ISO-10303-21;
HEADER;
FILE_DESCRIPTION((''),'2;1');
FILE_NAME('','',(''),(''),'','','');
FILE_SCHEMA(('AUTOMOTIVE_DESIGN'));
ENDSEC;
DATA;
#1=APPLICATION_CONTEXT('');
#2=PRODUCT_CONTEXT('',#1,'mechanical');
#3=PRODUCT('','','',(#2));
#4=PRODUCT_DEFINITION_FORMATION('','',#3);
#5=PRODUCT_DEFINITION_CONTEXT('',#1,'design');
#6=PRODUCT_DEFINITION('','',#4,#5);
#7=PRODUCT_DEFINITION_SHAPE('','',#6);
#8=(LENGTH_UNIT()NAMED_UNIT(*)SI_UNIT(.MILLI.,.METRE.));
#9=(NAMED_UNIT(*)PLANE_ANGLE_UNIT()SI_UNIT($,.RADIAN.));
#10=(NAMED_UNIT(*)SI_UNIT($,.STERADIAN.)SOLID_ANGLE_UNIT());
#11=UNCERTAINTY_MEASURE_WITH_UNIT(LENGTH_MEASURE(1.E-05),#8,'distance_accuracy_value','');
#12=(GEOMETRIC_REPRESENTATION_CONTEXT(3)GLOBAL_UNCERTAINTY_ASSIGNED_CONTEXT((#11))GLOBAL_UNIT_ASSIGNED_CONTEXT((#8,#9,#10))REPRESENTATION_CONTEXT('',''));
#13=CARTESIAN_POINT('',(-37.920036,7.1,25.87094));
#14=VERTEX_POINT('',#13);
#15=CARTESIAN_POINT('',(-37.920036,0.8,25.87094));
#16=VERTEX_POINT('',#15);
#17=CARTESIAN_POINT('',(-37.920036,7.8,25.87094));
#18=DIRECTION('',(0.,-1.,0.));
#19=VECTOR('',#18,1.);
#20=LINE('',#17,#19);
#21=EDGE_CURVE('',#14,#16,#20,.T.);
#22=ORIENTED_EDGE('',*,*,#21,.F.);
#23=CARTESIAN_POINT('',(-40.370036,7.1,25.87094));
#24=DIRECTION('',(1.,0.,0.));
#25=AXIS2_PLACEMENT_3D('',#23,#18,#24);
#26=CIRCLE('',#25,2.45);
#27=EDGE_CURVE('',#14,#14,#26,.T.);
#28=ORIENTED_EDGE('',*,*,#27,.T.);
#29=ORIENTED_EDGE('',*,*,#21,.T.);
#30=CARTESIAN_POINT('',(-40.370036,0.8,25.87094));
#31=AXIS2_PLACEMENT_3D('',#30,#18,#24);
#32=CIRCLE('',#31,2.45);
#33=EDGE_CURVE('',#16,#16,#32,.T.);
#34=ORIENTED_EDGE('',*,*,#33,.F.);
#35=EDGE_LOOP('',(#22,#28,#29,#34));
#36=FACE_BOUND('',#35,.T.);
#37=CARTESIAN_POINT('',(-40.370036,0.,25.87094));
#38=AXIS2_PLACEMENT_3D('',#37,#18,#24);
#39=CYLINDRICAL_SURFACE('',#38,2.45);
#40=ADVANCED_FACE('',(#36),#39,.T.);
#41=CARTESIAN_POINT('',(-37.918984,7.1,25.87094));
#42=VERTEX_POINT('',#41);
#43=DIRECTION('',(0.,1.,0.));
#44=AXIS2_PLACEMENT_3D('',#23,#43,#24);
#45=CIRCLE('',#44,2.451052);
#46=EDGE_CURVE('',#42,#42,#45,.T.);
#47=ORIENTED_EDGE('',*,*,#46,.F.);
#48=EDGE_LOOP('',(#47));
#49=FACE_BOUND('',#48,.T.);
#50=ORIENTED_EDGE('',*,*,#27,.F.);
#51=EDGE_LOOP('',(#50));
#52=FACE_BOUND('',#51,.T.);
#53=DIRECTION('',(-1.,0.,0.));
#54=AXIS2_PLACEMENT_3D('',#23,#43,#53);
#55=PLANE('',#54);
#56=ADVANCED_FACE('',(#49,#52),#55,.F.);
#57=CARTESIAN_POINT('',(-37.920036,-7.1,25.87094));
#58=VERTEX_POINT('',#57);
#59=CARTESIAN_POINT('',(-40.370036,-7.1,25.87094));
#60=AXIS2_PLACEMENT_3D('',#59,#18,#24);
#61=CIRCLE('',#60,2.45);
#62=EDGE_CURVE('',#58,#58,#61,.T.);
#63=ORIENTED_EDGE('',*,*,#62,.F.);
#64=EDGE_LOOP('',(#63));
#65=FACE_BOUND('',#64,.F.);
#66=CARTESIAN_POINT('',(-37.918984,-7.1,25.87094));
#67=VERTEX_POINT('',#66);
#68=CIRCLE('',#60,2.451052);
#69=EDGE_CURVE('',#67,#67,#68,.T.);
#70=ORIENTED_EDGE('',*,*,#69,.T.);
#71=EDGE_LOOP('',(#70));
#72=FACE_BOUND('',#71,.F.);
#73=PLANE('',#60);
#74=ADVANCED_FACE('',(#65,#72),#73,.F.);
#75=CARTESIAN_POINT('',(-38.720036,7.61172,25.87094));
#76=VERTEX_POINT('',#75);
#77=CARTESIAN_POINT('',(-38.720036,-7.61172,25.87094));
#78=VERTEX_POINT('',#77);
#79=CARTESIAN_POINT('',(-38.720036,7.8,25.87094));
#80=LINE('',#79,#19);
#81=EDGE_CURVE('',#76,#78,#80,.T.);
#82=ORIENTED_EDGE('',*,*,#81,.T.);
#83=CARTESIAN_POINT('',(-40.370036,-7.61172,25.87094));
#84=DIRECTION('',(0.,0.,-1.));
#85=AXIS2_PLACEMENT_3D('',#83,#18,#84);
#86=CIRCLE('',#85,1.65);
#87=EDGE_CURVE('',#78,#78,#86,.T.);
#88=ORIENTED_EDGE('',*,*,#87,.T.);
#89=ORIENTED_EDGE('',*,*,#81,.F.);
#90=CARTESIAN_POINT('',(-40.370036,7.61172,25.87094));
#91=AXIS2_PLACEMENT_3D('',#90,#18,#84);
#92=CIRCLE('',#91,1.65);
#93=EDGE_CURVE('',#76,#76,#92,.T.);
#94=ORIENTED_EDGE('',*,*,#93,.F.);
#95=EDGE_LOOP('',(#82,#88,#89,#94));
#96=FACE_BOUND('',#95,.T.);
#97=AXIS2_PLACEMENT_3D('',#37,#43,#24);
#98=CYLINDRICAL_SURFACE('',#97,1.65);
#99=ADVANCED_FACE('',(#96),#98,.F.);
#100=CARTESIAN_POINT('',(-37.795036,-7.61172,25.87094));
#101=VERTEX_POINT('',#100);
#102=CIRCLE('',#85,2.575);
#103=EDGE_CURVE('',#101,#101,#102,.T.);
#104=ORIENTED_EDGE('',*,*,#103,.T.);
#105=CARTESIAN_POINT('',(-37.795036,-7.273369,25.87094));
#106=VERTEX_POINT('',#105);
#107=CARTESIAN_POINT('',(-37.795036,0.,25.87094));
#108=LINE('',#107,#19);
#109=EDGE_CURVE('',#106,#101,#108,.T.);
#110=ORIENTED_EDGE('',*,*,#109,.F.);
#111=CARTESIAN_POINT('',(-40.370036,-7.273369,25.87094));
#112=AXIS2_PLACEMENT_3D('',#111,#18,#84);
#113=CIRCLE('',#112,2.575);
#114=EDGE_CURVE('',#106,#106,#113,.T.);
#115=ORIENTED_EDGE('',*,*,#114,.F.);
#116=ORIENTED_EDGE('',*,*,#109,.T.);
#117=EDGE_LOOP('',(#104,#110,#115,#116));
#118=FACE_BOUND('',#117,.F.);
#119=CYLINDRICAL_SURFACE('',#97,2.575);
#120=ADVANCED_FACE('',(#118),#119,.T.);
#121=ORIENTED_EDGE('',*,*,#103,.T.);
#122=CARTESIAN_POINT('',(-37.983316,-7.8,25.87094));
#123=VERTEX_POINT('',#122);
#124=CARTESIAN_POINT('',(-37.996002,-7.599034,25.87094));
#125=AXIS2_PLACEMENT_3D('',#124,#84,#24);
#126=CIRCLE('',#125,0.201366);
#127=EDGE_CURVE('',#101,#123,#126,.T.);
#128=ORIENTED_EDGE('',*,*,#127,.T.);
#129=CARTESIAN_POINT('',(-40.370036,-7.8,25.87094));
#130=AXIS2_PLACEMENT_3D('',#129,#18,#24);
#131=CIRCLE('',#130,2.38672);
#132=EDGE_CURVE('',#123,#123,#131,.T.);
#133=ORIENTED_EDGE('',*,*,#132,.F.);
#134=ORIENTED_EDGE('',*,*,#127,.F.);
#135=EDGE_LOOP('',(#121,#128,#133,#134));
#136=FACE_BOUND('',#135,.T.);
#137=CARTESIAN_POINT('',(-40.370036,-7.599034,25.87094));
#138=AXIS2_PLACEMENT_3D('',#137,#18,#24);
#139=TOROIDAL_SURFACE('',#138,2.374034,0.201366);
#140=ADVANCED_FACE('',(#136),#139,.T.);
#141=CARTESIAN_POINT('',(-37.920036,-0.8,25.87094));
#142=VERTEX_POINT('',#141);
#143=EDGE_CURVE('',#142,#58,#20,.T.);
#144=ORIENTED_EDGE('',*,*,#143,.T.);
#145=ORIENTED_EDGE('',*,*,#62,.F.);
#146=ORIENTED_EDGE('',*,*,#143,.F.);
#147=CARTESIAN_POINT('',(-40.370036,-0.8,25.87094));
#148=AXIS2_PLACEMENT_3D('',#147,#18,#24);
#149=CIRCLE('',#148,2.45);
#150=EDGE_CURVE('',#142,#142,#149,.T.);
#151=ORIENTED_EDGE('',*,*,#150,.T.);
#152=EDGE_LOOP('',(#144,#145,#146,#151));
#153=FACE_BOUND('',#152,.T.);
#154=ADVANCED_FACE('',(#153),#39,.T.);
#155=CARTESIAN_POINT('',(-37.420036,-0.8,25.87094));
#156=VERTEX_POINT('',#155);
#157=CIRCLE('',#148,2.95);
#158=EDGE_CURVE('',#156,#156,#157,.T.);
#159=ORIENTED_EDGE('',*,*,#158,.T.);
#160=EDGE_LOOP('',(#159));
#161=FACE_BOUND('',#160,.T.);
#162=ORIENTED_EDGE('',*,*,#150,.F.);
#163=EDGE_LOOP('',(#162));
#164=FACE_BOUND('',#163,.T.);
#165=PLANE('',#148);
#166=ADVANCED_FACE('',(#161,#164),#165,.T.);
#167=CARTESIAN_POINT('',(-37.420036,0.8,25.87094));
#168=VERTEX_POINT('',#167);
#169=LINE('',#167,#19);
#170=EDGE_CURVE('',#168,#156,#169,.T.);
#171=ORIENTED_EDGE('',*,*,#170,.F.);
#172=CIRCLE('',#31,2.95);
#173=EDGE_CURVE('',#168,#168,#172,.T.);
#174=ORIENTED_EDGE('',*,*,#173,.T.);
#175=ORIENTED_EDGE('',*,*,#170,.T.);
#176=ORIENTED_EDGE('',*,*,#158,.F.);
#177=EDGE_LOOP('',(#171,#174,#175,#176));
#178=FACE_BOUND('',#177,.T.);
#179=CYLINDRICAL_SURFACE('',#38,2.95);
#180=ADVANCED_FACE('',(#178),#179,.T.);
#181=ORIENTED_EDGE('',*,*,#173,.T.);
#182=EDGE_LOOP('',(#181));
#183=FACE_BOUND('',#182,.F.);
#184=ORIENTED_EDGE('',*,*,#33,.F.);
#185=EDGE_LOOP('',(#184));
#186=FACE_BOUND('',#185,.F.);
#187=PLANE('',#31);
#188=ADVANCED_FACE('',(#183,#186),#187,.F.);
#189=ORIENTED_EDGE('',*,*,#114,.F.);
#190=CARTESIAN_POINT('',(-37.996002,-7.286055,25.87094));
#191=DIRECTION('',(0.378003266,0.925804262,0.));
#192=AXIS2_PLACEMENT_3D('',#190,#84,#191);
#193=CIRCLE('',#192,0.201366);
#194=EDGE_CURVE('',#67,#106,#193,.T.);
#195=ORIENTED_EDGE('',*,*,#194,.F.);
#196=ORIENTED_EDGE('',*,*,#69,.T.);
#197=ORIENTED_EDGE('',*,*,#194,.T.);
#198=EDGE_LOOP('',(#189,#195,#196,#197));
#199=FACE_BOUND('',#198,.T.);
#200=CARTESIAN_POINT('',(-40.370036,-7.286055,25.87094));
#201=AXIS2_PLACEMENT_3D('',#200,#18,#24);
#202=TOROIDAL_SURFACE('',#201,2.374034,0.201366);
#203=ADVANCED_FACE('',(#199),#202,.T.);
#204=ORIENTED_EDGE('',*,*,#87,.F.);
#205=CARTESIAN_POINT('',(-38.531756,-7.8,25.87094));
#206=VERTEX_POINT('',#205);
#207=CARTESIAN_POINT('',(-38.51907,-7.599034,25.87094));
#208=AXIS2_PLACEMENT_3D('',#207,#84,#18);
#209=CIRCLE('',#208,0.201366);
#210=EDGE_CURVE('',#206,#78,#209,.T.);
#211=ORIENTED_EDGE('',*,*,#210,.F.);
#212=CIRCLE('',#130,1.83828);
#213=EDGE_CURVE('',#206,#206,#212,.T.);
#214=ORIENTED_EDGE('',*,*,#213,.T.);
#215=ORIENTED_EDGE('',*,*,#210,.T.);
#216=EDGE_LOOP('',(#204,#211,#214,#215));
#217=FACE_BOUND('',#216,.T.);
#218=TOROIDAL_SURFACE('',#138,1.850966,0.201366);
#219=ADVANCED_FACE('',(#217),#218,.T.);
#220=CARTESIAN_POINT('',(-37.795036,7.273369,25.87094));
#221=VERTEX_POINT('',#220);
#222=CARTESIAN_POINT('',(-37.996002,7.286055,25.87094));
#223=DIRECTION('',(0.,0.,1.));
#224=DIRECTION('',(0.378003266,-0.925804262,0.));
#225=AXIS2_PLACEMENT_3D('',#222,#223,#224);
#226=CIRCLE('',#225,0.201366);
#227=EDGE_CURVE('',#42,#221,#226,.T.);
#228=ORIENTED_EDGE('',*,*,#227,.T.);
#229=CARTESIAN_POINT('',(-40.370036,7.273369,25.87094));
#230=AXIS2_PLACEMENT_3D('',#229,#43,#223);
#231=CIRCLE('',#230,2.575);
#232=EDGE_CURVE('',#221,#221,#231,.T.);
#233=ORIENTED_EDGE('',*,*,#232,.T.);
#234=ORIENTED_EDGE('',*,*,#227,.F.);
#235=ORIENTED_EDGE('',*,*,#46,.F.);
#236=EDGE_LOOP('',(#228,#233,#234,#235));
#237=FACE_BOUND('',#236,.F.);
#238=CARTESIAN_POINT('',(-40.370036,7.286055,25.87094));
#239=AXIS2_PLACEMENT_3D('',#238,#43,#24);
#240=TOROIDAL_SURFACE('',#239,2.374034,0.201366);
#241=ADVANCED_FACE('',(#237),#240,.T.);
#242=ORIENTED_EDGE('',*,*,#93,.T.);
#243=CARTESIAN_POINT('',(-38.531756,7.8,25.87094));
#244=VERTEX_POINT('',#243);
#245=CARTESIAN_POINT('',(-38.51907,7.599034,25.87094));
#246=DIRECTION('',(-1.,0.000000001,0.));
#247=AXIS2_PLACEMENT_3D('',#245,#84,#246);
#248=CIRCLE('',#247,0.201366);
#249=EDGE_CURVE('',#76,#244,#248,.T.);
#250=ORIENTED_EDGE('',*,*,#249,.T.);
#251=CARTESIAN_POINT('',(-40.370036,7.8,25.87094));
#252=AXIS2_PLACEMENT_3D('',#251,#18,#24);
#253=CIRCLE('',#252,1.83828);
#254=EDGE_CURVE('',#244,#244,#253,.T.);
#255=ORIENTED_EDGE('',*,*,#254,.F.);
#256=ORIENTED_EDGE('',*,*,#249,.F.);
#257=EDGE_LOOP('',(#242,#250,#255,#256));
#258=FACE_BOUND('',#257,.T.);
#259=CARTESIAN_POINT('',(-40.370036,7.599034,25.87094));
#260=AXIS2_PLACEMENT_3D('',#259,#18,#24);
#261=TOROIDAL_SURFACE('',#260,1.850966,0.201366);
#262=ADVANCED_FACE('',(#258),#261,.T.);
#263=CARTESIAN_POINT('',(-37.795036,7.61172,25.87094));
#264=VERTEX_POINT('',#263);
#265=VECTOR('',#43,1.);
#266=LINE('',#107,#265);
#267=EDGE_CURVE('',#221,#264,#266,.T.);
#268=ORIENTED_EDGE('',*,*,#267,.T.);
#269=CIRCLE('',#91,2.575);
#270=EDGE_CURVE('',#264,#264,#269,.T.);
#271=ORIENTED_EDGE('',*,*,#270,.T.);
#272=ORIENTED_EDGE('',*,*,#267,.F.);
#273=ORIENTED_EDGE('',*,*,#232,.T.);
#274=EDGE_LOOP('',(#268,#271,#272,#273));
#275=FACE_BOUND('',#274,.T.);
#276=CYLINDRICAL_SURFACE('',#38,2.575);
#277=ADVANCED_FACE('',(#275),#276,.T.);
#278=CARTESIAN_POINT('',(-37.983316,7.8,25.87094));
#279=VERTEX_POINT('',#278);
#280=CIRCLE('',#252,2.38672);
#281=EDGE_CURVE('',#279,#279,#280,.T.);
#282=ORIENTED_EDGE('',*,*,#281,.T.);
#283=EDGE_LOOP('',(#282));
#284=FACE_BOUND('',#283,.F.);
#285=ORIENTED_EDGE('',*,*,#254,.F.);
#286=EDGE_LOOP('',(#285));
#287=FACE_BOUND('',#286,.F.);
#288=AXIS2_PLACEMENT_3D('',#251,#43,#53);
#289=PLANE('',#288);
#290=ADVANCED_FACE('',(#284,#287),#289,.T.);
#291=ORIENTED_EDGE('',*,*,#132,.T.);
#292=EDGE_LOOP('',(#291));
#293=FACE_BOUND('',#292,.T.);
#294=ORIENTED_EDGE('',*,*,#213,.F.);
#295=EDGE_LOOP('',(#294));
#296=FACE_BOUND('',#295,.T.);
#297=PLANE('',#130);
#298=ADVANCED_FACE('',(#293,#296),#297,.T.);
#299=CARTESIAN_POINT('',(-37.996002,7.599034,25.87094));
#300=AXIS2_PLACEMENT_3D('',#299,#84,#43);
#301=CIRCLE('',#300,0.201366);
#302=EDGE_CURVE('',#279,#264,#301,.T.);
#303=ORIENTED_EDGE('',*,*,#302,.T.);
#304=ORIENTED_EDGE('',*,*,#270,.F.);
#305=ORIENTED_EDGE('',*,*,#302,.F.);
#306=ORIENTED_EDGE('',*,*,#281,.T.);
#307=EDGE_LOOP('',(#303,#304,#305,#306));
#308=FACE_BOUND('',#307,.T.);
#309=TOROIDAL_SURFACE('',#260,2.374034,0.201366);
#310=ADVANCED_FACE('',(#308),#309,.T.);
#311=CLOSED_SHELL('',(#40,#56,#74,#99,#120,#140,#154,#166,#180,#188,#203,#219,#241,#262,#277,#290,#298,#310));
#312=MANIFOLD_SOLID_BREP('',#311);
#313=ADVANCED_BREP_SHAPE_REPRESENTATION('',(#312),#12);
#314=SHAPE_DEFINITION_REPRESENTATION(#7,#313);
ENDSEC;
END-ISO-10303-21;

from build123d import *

# Parameters (mm, degrees)
F0_R     = 2.95
F0_R_2   = 2.575
F1_DEPTH = 0.8
F0_R_3   = 2.45
F2_DEPTH = 0.8
F0_R_4   = 1.65
F3_DEPTH = 7.8
F4_DEPTH = 7.8
F5_DEPTH = 7.1
F6_DEPTH = 7.8
F7_DEPTH = 0.8


# Not quite as in the source:
# - a fillet or chamfer that OpenCascade refuses, or shapes differently, is made with other operations: its cross-section is extruded or revolved along the edge and cut away or added


with BuildPart() as f1:
    # F0 (on Front) → F1 (new body)
    with BuildSketch(Plane.XZ):
        with Locations((-40.3700359166, 25.8709397167)):
            Circle(F0_R)
        with Locations((-40.3700359166, 25.8709397167)):
            Circle(F0_R_2, mode=Mode.SUBTRACT)
    extrude(amount=F1_DEPTH)

    # F0 (on Front) → F2 (join)
    with BuildSketch(Plane.XZ):
        with Locations((-40.3700359166, 25.8709397167)):
            Circle(F0_R_2)
        with Locations((-40.3700359166, 25.8709397167)):
            Circle(F0_R_3, mode=Mode.SUBTRACT)
    extrude(amount=F2_DEPTH)

    # F0 (on Front) → F3 (join)
    with BuildSketch(Plane.XZ):
        with Locations((-40.3700359166, 25.8709397167)):
            Circle(F0_R_3)
        with Locations((-40.3700359166, 25.8709397167)):
            Circle(F0_R_4, mode=Mode.SUBTRACT)
    extrude(amount=F3_DEPTH)

    # F0 (on Front) → F4 (join)
    with BuildSketch(Plane.XZ):
        with Locations((-40.3700359166, 25.8709397167)):
            Circle(F0_R_2)
        with Locations((-40.3700359166, 25.8709397167)):
            Circle(F0_R_3, mode=Mode.SUBTRACT)
    extrude(amount=F4_DEPTH)

    # F0 (on Front) → F5 (cut)
    with BuildSketch(Plane.XZ):
        with Locations((-40.3700359166, 25.8709397167)):
            Circle(F0_R_2)
        with Locations((-40.3700359166, 25.8709397167)):
            Circle(F0_R_3, mode=Mode.SUBTRACT)
    extrude(amount=F5_DEPTH, mode=Mode.SUBTRACT)

    # F0 (on Front) → F6 (join)
    with BuildSketch(Plane.XZ):
        with Locations((-40.3700359166, 25.8709397167)):
            Circle(F0_R_3)
        with Locations((-40.3700359166, 25.8709397167)):
            Circle(F0_R_4, mode=Mode.SUBTRACT)
    extrude(amount=-F6_DEPTH)

    # F0 (on Front) → F7 (join)
    with BuildSketch(Plane.XZ):
        with Locations((-40.3700359166, 25.8709397167)):
            Circle(F0_R)
        with Locations((-40.3700359166, 25.8709397167)):
            Circle(F0_R_2, mode=Mode.SUBTRACT)
        with Locations((-40.3700359166, 25.8709397167)):
            Circle(F0_R_2)
        with Locations((-40.3700359166, 25.8709397167)):
            Circle(F0_R_3, mode=Mode.SUBTRACT)
    extrude(amount=-F7_DEPTH)

    # F8: F1 across plane


with BuildPart() as f1_1:
    add(f1.part)
    add(f1.part.mirror(Plane.XZ))

    # F9: fillet of radius 0.2 on 6 edges, made by hand

    # F9_s1 → F9_t2 (revolve, cut)
    with BuildSketch(Plane.XY.offset(25.8709397167)):
        with BuildLine():
            ThreePointArc((-38.5190702311, -7.8004), (-38.6614572728, -7.7414213562), (-38.7204359166, -7.5990343146))
            Line((-38.7204359166, -7.5990343146), (-38.7405724851, -7.5990343146))
            ThreePointArc((-38.7405724851, -7.5990343146), (-38.7401724851, -7.6995171573), (-38.7401724851, -7.8))
            Line((-38.7401724851, -7.8), (-38.7200359166, -7.8201365685))
            ThreePointArc((-38.7200359166, -7.8201365685), (-38.6195530739, -7.8201365685), (-38.5190702311, -7.8205365685))
            Line((-38.5190702311, -7.8205365685), (-38.5190702311, -7.8004))
        make_face()
    revolve(axis=Axis((-40.3700359166, -7.8, 25.8709397167), (0, -1, 0)), mode=Mode.SUBTRACT)

    # F9_s3 → F9_t4 (revolve, cut)
    with BuildSketch(Plane.XY.offset(25.8709397167)):
        with BuildLine():
            ThreePointArc((-37.7946359166, -7.5990343146), (-37.8536145603, -7.7414213562), (-37.996001602, -7.8004))
            Line((-37.996001602, -7.8004), (-37.996001602, -7.8205365685))
            ThreePointArc((-37.996001602, -7.8205365685), (-37.8955187593, -7.8201365685), (-37.7950359166, -7.8201365685))
            Line((-37.7950359166, -7.8201365685), (-37.774899348, -7.8))
            ThreePointArc((-37.774899348, -7.8), (-37.774899348, -7.6995171573), (-37.774499348, -7.5990343146))
            Line((-37.774499348, -7.5990343146), (-37.7946359166, -7.5990343146))
        make_face()
    revolve(axis=Axis((-40.3700359166, -7.8, 25.8709397167), (0, -1, 0)), mode=Mode.SUBTRACT)

    # F9_s5 → F9_t6 (revolve, cut)
    with BuildSketch(Plane.XY.offset(25.8709397167)):
        with BuildLine():
            ThreePointArc((-37.9198847153, -7.0996296783), (-37.828855755, -7.173758828), (-37.7946359166, -7.286054888))
            Line((-37.7946359166, -7.286054888), (-37.774499348, -7.286054888))
            ThreePointArc((-37.774499348, -7.286054888), (-37.774899348, -7.193027444), (-37.774899348, -7.1))
            Line((-37.774899348, -7.1), (-37.7950359166, -7.0798634315))
            ThreePointArc((-37.7950359166, -7.0798634315), (-37.8574603159, -7.0798634315), (-37.9122730266, -7.0809871573))
            Line((-37.9122730266, -7.0809871573), (-37.9198847153, -7.0996296783))
        make_face()
    revolve(axis=Axis((-40.3700359166, -7.1, 25.8709397167), (0, -1, 0)), mode=Mode.SUBTRACT)

    # F9_s7 → F9_t8 (revolve, cut)
    with BuildSketch(Plane.XY.offset(25.8709397167)):
        with BuildLine():
            ThreePointArc((-37.996001602, 7.8004), (-37.8536145603, 7.7414213562), (-37.7946359166, 7.5990343146))
            Line((-37.7946359166, 7.5990343146), (-37.774499348, 7.5990343146))
            ThreePointArc((-37.774499348, 7.5990343146), (-37.774899348, 7.6995171573), (-37.774899348, 7.8))
            Line((-37.774899348, 7.8), (-37.7950359166, 7.8201365685))
            ThreePointArc((-37.7950359166, 7.8201365685), (-37.8955187593, 7.8201365685), (-37.996001602, 7.8205365685))
            Line((-37.996001602, 7.8205365685), (-37.996001602, 7.8004))
        make_face()
    revolve(axis=Axis((-40.3700359166, 7.8, 25.8709397167), (0, -1, 0)), mode=Mode.SUBTRACT)

    # F9_s9 → F9_t10 (revolve, cut)
    with BuildSketch(Plane.XY.offset(25.8709397167)):
        with BuildLine():
            ThreePointArc((-37.9198847153, 7.0996296783), (-37.828855755, 7.173758828), (-37.7946359166, 7.286054888))
            Line((-37.7946359166, 7.286054888), (-37.774499348, 7.286054888))
            ThreePointArc((-37.774499348, 7.286054888), (-37.774899348, 7.193027444), (-37.774899348, 7.1))
            Line((-37.774899348, 7.1), (-37.7950359166, 7.0798634315))
            ThreePointArc((-37.7950359166, 7.0798634315), (-37.8574603159, 7.0798634315), (-37.9122730266, 7.0809871573))
            Line((-37.9122730266, 7.0809871573), (-37.9198847153, 7.0996296783))
        make_face()
    revolve(axis=Axis((-40.3700359166, 7.1, 25.8709397167), (0, -1, 0)), mode=Mode.SUBTRACT)

    # F9_s11 → F9_t12 (revolve, cut)
    with BuildSketch(Plane.XY.offset(25.8709397167)):
        with BuildLine():
            ThreePointArc((-38.7204359166, 7.5990343146), (-38.6614572728, 7.7414213562), (-38.5190702311, 7.8004))
            Line((-38.5190702311, 7.8004), (-38.5190702311, 7.8205365685))
            ThreePointArc((-38.5190702311, 7.8205365685), (-38.6195530739, 7.8201365685), (-38.7200359166, 7.8201365685))
            Line((-38.7200359166, 7.8201365685), (-38.7401724851, 7.8))
            ThreePointArc((-38.7401724851, 7.8), (-38.7401724851, 7.6995171573), (-38.7405724851, 7.5990343146))
            Line((-38.7405724851, 7.5990343146), (-38.7204359166, 7.5990343146))
        make_face()
    revolve(axis=Axis((-40.3700359166, 7.8, 25.8709397167), (0, -1, 0)), mode=Mode.SUBTRACT)


solid = f1_1.part
